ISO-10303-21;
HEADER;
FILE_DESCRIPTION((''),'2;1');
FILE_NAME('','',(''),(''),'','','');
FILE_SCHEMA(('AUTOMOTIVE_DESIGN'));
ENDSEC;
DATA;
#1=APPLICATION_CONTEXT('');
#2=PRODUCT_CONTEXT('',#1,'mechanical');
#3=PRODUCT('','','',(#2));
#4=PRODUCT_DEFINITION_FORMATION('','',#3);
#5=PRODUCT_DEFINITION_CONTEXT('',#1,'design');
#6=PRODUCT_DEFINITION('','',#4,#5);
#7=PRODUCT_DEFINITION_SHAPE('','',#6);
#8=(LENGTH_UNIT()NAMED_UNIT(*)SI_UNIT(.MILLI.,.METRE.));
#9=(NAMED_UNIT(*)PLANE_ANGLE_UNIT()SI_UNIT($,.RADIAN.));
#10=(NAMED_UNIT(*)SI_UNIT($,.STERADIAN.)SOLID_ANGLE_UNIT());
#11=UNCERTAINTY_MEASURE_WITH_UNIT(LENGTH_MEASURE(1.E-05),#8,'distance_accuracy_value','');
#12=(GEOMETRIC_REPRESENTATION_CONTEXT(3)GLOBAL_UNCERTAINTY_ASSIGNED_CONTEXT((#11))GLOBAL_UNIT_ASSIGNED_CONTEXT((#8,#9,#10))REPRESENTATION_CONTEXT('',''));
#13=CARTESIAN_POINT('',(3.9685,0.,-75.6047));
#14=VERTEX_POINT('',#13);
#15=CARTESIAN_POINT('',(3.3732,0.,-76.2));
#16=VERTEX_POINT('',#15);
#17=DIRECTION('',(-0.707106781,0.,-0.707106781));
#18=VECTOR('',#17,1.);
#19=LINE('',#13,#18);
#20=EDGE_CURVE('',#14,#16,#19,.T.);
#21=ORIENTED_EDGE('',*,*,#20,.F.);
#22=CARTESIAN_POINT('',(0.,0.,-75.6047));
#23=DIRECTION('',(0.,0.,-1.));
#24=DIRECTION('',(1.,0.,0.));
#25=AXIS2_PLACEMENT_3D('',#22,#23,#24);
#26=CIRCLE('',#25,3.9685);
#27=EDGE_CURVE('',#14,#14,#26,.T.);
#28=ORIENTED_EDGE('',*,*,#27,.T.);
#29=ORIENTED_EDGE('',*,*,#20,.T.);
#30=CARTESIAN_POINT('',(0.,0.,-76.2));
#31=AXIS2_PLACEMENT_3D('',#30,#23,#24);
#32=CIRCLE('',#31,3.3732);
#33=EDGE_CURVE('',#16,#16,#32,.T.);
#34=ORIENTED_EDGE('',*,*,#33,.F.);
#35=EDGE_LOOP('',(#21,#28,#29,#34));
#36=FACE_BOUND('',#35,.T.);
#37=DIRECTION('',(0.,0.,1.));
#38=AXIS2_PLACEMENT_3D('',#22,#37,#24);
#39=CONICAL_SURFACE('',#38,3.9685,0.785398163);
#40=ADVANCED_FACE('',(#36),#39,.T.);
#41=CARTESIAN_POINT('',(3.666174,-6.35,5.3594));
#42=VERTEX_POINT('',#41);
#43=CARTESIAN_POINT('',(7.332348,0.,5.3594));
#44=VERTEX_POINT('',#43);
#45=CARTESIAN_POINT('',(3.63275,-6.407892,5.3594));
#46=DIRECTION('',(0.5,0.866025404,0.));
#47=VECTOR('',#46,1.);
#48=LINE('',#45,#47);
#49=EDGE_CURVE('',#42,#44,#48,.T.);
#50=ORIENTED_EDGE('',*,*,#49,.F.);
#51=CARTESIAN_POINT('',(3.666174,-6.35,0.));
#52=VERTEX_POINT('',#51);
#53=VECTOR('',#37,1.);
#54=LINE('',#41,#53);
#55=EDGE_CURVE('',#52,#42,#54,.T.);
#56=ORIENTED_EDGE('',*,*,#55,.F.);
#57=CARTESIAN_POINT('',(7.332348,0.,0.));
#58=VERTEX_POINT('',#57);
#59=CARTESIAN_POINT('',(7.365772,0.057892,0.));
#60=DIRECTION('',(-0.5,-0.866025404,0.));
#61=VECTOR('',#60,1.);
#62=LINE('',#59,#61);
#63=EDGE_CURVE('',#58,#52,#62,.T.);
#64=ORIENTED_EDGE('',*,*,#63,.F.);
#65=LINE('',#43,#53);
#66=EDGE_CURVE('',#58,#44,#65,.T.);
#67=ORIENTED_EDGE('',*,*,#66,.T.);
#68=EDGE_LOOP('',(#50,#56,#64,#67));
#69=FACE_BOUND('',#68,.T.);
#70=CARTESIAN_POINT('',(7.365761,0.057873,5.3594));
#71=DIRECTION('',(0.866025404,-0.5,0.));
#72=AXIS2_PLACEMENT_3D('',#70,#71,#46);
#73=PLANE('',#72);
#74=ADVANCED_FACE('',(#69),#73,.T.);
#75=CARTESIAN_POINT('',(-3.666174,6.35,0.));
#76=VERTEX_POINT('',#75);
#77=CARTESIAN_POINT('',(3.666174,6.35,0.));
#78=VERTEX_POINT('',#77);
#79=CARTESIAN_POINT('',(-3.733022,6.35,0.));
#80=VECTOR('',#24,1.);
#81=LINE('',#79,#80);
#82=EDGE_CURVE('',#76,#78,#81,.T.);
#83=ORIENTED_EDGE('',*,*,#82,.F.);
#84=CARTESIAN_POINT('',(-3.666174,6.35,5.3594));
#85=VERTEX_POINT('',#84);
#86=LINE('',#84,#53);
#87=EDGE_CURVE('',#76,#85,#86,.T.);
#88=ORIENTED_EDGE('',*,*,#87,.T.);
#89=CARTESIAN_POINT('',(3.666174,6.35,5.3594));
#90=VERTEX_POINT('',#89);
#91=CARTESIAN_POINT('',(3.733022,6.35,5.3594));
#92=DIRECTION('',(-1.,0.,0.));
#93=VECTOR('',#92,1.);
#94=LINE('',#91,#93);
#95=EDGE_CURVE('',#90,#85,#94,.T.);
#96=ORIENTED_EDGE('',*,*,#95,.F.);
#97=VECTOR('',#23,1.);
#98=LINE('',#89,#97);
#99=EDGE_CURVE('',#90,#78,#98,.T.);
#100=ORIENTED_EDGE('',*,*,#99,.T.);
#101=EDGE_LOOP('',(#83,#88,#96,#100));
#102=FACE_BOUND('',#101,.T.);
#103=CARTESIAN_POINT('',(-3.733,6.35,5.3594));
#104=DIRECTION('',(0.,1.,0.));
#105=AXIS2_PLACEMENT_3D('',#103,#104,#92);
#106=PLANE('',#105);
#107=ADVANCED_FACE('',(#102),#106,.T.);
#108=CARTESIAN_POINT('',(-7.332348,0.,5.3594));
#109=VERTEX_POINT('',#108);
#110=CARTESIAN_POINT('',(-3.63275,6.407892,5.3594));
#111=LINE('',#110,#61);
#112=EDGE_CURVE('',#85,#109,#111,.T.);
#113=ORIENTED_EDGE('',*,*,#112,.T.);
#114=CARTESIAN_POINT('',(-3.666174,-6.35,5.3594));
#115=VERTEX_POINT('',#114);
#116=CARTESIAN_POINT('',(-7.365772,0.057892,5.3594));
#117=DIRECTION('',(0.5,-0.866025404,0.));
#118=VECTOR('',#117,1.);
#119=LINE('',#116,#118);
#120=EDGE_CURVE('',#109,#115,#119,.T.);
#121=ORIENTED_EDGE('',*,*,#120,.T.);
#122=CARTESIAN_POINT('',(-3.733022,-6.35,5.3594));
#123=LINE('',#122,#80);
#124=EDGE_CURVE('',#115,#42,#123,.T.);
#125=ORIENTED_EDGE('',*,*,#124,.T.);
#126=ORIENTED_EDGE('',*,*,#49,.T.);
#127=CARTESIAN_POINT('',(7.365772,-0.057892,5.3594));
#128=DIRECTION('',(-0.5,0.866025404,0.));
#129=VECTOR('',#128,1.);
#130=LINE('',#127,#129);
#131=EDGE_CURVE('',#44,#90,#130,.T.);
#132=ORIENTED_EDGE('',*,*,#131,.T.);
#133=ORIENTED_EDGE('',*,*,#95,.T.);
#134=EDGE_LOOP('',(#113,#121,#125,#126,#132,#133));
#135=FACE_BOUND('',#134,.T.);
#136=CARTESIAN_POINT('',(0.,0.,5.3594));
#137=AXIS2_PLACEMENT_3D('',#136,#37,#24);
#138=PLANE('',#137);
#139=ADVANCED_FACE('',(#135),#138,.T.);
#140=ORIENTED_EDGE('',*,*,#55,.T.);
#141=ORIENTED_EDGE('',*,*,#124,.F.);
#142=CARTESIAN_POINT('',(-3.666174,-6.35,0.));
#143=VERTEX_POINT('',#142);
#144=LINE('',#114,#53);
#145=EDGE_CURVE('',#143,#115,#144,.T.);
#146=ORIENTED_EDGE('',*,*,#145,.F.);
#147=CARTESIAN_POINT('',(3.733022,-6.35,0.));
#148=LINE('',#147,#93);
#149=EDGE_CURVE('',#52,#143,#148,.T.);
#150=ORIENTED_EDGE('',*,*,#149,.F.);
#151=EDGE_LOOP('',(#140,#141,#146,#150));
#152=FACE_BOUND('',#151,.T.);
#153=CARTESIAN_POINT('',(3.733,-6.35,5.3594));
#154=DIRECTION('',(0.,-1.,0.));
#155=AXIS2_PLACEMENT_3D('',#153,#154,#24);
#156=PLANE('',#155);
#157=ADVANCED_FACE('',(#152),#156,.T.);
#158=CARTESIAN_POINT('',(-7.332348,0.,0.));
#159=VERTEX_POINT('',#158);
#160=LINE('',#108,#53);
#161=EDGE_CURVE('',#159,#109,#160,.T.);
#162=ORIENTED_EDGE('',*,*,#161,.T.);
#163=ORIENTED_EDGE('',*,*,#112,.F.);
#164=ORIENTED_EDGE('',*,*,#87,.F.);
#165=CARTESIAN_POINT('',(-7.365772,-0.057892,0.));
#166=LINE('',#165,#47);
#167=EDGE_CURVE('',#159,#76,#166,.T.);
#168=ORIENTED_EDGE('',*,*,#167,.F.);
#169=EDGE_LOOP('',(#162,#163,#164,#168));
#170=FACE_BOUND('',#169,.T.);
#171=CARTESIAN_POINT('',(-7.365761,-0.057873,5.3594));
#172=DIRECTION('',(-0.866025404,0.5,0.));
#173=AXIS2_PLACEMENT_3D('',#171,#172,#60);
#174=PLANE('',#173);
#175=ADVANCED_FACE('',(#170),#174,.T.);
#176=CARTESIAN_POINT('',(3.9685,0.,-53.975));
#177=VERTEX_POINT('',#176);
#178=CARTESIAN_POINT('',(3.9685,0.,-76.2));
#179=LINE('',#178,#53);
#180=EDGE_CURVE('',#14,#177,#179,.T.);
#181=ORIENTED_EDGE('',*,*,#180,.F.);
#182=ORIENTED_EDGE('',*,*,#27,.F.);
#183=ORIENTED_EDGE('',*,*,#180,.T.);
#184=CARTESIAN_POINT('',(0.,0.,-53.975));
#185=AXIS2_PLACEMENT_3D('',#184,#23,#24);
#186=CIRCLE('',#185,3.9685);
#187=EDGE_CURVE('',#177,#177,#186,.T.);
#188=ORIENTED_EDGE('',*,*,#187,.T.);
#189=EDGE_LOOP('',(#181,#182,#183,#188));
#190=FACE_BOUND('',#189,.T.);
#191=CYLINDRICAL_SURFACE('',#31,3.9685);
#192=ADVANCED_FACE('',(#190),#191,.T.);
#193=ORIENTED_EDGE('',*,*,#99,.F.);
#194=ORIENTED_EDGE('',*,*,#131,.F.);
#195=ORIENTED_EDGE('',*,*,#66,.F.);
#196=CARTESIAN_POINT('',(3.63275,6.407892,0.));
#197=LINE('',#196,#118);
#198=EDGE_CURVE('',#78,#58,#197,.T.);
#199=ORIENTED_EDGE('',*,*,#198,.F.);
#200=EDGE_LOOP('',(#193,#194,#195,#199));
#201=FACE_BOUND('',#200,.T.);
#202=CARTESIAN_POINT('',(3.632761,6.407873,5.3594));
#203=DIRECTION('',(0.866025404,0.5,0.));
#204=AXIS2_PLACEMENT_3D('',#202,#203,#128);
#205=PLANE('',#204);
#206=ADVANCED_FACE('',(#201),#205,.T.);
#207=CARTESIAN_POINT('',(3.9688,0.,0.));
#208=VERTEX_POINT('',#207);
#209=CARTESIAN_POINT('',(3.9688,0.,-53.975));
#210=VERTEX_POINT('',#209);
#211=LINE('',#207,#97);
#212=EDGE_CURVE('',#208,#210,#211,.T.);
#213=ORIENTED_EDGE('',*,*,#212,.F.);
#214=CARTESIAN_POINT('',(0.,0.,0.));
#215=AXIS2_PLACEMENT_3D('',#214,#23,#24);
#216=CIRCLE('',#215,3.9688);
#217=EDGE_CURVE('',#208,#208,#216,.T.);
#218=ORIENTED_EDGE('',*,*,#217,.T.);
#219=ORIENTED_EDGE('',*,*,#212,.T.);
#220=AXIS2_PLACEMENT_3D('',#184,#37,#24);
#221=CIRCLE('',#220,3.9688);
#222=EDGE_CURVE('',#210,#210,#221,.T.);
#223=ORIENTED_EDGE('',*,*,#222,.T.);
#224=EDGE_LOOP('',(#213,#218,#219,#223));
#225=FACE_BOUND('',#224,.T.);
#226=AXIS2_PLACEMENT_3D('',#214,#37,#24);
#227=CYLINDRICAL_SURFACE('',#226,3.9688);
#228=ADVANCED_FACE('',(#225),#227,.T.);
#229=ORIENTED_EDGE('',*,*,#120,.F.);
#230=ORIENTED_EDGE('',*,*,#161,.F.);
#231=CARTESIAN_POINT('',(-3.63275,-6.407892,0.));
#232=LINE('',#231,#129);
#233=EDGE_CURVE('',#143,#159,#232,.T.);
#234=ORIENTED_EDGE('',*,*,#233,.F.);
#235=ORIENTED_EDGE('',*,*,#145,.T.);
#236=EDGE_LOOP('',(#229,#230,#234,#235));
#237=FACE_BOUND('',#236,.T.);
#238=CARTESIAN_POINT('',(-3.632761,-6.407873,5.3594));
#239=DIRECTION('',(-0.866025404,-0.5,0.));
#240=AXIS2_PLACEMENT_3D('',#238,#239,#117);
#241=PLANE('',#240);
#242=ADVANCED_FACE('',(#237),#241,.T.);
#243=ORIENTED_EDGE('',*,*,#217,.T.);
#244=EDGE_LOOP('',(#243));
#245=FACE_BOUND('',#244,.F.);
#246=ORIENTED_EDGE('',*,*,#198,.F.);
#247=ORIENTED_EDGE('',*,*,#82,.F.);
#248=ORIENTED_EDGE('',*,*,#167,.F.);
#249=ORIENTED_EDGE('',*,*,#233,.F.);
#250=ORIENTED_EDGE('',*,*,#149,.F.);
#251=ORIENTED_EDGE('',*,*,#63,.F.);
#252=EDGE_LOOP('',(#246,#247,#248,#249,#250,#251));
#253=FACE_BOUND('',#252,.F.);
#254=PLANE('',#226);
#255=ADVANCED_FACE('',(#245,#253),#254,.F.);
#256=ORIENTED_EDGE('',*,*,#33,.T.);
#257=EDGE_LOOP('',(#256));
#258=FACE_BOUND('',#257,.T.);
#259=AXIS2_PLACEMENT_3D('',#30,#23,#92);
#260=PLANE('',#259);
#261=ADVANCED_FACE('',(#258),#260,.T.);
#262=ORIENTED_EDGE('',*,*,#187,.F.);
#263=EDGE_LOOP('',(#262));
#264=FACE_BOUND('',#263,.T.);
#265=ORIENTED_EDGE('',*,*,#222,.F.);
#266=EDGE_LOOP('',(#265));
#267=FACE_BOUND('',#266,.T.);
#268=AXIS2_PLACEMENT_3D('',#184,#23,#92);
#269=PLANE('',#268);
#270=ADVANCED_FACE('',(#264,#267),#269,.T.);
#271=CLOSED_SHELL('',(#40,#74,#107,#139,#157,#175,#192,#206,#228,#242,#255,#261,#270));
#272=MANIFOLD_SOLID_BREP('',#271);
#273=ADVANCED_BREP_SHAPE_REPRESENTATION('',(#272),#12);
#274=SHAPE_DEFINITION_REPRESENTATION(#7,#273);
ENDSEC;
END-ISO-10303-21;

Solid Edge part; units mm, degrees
sketch "Sketch1" plane through (0, 0, 0) normal (0, 0, 1) x (1, 0, 0)
  circle A0 centre (0, 0) radius 7.366
  dimension "D1" = 14.732
extrude "Protrusion1" add sketch "Sketch1" along normal blind 5.3594
sketch "Sketch2" plane through (0, 0, 0) normal (0, 0, -1) x (1, 0, 0)
  circle A0 centre (0, 0) radius 3.9688
extrude "Protrusion2" add sketch "Sketch2" along normal blind 76.2
sketch "Sketch3" plane through (0, 0, -76.2) normal (0, 0, -1) x (1, 0, 0)
  circle A0 centre (0, 0) radius 3.9685
extrude "Cutout1" cut sketch "Sketch3" against normal blind 22.225 flip side to cut
chamfer "Chamfer_1" distance 0.5953 angle 45 1 edges at (-3.9685, 0, -76.2)
sketch "Sketch4" plane through (0, 0, 5.3594) normal (0, 0, 1) x (1, 0, 0)
  line L0 (-3.733, 6.35) -> (3.733, 6.35)
  dimension "D1" = 12.7
extrude "Cutout2" cut sketch "Sketch4" against normal up to next material side at (0, 6.4, 5.3594)
pattern_circular "Pattern1" count 6 over 360 about axis through (0, 0, 5.3594) along (0, 0, 1) of "Cutout2"
properties part number "24100012"
